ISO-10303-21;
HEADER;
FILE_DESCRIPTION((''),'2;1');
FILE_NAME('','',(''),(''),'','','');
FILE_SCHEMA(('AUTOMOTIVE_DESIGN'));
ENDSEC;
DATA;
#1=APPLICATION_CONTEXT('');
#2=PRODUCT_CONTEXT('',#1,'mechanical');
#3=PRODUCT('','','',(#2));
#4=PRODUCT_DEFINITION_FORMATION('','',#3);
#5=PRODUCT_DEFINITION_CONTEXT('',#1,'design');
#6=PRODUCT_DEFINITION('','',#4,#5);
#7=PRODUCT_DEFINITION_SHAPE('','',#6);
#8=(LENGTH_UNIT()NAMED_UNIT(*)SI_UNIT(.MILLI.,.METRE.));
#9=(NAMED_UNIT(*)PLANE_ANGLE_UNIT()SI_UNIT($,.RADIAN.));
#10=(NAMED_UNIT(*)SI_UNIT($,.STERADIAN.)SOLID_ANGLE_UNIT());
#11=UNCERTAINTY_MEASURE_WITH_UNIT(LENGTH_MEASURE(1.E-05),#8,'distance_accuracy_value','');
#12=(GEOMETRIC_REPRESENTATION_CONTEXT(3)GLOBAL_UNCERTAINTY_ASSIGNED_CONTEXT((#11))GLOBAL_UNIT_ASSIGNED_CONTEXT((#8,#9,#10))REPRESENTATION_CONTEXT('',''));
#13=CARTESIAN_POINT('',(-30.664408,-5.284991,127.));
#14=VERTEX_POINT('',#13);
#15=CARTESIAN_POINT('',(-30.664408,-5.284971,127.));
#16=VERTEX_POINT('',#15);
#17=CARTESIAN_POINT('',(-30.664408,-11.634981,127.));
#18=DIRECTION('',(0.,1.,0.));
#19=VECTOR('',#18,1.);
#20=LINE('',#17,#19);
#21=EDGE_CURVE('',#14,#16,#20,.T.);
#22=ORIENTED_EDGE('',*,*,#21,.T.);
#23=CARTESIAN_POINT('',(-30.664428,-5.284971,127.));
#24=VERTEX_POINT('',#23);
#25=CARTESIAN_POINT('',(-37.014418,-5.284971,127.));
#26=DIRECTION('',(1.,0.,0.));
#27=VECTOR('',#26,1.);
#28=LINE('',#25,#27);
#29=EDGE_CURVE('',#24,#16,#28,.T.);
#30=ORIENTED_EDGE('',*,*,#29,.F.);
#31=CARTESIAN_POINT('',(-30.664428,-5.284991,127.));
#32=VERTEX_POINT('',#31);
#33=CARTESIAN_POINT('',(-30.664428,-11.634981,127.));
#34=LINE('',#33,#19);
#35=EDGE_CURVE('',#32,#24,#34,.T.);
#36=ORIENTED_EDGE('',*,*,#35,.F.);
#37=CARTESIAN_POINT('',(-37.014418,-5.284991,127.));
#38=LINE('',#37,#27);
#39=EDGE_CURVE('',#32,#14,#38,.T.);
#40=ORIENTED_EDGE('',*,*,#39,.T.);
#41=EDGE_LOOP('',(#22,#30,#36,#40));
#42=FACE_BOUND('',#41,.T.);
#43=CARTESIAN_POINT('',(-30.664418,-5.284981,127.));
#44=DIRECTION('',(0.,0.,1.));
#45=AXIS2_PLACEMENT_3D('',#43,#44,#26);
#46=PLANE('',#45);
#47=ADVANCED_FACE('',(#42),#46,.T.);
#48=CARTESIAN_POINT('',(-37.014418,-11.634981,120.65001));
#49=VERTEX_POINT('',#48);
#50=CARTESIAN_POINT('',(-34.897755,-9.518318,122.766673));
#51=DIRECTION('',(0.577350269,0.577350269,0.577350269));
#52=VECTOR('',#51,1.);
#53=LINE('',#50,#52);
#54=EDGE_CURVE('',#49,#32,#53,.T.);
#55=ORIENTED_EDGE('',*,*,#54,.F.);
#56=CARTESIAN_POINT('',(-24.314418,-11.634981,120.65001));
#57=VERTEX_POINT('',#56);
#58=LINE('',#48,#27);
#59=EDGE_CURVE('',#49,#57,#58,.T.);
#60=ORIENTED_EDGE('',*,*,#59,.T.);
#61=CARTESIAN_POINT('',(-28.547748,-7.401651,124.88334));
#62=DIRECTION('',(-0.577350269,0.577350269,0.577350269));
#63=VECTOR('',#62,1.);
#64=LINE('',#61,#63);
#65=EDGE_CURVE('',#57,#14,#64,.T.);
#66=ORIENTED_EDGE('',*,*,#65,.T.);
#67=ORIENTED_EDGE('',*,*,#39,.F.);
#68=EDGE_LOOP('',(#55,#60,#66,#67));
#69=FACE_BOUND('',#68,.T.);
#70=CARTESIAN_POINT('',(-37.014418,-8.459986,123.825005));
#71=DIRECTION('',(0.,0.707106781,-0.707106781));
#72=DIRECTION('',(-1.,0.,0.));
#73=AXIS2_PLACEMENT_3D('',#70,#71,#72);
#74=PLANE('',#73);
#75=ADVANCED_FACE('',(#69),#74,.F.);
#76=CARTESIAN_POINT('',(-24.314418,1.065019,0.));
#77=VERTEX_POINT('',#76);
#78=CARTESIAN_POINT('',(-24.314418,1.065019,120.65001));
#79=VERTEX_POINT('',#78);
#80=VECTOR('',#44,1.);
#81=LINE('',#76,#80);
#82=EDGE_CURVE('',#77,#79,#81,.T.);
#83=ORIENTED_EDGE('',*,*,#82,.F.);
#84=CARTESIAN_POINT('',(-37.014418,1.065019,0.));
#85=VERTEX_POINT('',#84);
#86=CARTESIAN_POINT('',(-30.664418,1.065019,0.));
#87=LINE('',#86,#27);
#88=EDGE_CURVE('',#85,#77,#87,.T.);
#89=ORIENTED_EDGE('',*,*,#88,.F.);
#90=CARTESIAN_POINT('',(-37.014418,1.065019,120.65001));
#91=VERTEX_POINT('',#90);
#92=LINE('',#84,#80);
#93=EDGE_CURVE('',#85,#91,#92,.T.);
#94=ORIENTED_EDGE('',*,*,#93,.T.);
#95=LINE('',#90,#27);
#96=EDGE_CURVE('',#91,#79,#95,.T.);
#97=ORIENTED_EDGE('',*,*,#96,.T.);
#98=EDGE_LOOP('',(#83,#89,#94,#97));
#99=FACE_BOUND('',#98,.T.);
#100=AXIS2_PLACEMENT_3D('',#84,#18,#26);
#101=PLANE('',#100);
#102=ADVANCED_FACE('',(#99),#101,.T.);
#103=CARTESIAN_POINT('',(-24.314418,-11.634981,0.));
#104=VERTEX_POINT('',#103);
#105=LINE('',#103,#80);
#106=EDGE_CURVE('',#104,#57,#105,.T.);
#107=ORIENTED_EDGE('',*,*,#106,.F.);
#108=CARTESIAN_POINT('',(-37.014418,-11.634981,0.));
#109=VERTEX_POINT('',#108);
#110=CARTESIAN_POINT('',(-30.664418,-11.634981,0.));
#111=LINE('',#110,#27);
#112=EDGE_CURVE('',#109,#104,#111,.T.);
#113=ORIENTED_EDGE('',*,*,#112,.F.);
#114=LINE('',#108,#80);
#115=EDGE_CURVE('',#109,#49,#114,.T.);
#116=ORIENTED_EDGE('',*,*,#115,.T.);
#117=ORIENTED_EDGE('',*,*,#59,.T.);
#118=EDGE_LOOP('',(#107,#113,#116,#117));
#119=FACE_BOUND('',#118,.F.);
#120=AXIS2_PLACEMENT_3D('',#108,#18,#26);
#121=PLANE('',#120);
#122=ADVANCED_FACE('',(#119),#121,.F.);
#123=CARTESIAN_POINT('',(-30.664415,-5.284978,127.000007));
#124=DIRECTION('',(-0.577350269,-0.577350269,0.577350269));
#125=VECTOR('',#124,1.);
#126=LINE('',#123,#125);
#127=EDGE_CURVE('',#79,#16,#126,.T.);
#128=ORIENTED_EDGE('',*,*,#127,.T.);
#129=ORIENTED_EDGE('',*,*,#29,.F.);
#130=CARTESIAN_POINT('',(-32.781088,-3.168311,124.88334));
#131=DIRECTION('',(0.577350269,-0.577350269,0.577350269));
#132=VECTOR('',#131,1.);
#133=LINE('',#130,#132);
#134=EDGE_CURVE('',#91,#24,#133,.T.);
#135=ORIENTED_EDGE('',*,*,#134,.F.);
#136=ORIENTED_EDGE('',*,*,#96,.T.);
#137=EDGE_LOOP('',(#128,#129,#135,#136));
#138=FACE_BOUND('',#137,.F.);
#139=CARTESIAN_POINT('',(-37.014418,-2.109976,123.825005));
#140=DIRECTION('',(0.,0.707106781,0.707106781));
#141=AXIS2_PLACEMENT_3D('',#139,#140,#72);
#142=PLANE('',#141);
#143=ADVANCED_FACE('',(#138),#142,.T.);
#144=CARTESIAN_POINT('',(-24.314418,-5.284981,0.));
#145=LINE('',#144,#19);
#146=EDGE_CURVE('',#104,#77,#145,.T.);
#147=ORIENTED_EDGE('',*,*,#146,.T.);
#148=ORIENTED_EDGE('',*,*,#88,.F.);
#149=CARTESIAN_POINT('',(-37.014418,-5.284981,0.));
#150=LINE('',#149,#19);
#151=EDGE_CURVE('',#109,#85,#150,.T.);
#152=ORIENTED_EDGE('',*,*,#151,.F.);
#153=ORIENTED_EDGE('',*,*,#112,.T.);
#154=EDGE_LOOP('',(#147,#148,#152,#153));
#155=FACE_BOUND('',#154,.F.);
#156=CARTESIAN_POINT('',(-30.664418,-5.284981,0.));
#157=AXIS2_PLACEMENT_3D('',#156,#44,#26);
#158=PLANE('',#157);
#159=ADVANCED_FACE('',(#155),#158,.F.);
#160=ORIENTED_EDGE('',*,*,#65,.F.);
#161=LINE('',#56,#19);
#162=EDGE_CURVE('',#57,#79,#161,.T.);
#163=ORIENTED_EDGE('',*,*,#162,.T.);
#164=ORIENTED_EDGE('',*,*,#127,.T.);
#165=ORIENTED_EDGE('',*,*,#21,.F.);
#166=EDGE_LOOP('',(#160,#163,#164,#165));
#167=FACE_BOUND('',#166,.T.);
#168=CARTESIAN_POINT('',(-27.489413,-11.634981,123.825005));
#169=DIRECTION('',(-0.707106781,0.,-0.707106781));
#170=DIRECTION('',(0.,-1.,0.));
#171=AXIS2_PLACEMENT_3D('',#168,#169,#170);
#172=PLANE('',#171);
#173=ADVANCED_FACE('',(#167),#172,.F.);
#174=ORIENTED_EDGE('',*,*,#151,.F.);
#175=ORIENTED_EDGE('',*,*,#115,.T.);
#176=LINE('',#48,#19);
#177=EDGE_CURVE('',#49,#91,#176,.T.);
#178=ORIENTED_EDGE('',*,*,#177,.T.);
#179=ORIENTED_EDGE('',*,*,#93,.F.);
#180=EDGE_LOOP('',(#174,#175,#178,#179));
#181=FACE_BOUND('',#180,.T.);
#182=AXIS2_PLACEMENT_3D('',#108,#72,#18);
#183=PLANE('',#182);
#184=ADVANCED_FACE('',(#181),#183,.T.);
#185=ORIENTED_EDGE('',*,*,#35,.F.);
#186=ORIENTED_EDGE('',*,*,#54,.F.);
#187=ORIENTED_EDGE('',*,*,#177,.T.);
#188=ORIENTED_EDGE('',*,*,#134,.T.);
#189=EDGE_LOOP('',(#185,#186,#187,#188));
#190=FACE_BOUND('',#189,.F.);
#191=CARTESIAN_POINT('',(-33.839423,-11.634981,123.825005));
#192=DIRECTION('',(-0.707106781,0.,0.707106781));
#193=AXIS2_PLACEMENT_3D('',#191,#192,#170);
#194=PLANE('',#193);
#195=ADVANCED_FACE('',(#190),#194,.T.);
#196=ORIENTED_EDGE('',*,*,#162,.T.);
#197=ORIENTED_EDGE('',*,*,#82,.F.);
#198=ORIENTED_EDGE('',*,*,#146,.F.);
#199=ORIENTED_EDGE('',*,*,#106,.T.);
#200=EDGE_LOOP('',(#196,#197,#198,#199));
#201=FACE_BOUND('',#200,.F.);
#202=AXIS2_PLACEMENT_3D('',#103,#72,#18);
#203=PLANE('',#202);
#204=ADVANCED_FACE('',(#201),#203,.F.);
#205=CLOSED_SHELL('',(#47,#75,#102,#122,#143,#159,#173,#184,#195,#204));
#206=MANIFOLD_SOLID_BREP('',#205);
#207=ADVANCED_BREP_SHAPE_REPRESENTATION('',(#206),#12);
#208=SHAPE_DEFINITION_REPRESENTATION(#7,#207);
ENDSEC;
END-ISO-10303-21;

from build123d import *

# Parameters (mm, degrees)
F0_W     = 12.7
F0_H     = 12.7
F1_DEPTH = 127
F2_SIZE  = 6.34999


# Not quite as in the source:
# - a fillet or chamfer is up to 0.001 mm smaller than in the source, because OpenCascade refuses the exact size


with BuildPart() as f1:
    # F0 (on Top) → F1 (new body)
    with BuildSketch(Plane.XY):
        with Locations((-30.6644180454, -5.2849810437)):
            Rectangle(F0_W, F0_H)
    extrude(amount=F1_DEPTH)

    # F2 (size 6.35 in the source; OpenCascade refuses exactly that, so slightly less here)
    f2_edges = [f1.edges().sort_by_distance(p)[0] for p in [
        (-37.014418, -5.284981, 127),
        (-24.314418, -5.284981, 127),
        (-30.664418, -11.634981, 127),
        (-30.664418, 1.065019, 127),
    ]]
    chamfer(f2_edges, length=F2_SIZE)


solid = f1.part
